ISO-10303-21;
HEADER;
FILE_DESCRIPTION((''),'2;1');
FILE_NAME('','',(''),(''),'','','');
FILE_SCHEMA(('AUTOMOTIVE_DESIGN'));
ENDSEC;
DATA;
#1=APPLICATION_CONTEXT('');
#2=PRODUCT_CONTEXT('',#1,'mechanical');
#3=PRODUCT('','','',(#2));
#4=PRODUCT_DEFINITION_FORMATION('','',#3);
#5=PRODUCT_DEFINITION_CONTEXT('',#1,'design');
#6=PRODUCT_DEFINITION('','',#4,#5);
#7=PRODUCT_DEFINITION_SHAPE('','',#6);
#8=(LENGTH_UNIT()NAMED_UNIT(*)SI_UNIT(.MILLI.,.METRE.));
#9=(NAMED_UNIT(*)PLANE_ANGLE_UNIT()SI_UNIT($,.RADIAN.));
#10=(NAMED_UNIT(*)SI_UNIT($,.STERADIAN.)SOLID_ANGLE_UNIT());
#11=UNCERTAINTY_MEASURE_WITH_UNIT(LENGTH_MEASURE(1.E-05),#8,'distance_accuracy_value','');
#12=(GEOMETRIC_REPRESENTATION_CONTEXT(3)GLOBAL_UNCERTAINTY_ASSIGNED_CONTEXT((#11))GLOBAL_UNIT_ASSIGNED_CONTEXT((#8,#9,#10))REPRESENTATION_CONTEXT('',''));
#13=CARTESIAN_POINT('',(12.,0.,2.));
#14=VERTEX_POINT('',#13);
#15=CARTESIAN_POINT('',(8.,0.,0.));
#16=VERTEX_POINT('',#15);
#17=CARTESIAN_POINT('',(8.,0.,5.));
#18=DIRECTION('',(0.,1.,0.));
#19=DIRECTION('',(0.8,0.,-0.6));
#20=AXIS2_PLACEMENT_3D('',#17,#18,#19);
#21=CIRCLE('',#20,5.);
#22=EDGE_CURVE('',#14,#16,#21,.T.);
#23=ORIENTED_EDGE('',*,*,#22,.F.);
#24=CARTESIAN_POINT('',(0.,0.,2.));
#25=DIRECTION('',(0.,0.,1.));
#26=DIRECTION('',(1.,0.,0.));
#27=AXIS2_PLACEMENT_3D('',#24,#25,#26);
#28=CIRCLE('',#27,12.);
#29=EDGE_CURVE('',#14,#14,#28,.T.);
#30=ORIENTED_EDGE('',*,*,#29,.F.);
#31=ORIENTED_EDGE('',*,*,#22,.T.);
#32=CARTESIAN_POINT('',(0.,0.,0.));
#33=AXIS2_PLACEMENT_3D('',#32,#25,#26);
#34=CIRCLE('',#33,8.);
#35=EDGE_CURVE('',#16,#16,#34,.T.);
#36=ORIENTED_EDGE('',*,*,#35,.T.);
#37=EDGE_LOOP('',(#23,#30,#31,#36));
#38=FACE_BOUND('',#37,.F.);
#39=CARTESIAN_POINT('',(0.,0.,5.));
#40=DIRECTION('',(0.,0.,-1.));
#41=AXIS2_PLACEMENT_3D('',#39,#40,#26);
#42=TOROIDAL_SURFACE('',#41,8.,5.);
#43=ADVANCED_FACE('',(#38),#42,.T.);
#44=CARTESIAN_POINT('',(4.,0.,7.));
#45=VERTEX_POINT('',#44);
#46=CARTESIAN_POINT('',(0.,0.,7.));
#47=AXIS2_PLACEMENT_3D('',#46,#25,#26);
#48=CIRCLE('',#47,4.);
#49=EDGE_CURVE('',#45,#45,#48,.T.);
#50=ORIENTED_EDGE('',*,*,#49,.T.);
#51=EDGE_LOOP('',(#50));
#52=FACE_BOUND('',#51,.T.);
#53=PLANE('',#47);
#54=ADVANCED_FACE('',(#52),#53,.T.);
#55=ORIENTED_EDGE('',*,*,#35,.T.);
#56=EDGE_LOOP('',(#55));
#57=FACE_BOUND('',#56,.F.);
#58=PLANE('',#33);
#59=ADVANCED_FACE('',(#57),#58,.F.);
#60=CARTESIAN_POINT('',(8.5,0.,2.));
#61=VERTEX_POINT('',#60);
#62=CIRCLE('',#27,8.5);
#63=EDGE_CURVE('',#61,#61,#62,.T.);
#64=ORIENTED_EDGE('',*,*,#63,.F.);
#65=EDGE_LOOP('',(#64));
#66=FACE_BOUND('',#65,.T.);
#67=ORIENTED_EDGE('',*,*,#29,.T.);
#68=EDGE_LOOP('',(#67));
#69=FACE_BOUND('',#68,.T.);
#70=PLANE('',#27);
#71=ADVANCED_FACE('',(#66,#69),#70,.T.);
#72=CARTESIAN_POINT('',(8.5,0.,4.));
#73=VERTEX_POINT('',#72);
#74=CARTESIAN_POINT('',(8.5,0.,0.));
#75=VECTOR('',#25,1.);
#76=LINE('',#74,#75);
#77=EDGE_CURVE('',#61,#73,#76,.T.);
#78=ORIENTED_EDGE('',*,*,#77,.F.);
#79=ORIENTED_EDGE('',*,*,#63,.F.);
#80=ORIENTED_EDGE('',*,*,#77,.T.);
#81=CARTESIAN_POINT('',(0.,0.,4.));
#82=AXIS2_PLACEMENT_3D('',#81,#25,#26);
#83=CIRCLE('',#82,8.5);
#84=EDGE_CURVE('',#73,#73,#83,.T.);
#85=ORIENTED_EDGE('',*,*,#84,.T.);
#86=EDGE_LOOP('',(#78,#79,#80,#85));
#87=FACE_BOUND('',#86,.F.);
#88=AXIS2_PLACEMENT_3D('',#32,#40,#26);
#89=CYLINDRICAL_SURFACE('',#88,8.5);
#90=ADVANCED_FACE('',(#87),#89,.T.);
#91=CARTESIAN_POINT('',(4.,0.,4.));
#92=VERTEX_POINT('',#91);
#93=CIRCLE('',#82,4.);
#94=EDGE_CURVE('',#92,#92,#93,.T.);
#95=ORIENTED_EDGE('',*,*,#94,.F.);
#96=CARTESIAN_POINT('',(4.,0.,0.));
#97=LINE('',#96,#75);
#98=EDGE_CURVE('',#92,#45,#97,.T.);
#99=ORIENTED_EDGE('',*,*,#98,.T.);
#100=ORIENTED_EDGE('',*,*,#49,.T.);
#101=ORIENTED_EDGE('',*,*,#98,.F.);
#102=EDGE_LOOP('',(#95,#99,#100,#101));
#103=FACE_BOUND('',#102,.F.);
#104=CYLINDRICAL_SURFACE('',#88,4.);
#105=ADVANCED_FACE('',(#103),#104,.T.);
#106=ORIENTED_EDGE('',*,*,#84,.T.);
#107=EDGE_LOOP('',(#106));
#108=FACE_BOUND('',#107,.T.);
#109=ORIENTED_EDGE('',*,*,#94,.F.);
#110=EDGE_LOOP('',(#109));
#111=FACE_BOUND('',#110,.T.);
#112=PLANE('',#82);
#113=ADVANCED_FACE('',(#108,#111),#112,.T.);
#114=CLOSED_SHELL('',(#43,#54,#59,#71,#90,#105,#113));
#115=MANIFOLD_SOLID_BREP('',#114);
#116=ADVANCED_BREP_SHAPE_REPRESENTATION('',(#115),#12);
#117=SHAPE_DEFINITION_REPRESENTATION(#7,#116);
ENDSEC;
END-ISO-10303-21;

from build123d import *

# Parameters (mm, degrees)
F0_R     = 12
F0_R_2   = 8.5
F1_DEPTH = 2
F0_R_3   = 4
F2_DEPTH = 4
F3_DEPTH = 7


# Not quite as in the source:
# - a fillet or chamfer that OpenCascade refuses, or shapes differently, is made with other operations: its cross-section is extruded or revolved along the edge and cut away or added


with BuildPart() as f1:
    # F0 (on Top) → F1 (new body)
    with BuildSketch(Plane.XY):
        Circle(F0_R)
        Circle(F0_R_2, mode=Mode.SUBTRACT)
    extrude(amount=F1_DEPTH)

    # F0 (on Top) → F2 (join)
    with BuildSketch(Plane.XY):
        Circle(F0_R_2)
        Circle(F0_R_3, mode=Mode.SUBTRACT)
    extrude(amount=F2_DEPTH)

    # F0 (on Top) → F3 (join)
    with BuildSketch(Plane.XY):
        Circle(F0_R_3)
    extrude(amount=F3_DEPTH)

    # F4: fillet of radius 5 on 1 edges, made by hand

    # F4_s1 → F4_t2 (revolve, cut)
    with BuildSketch(Plane.XZ):
        with BuildLine():
            ThreePointArc((12, 2), (10.2360679775, 0.527864045), (8, 0))
            Line((8, 0), (12, 0))
            Line((12, 0), (12, 2))
        make_face()
    revolve(axis=Axis((0, 0, 0), (0, 0, 1)), mode=Mode.SUBTRACT)


solid = f1.part
